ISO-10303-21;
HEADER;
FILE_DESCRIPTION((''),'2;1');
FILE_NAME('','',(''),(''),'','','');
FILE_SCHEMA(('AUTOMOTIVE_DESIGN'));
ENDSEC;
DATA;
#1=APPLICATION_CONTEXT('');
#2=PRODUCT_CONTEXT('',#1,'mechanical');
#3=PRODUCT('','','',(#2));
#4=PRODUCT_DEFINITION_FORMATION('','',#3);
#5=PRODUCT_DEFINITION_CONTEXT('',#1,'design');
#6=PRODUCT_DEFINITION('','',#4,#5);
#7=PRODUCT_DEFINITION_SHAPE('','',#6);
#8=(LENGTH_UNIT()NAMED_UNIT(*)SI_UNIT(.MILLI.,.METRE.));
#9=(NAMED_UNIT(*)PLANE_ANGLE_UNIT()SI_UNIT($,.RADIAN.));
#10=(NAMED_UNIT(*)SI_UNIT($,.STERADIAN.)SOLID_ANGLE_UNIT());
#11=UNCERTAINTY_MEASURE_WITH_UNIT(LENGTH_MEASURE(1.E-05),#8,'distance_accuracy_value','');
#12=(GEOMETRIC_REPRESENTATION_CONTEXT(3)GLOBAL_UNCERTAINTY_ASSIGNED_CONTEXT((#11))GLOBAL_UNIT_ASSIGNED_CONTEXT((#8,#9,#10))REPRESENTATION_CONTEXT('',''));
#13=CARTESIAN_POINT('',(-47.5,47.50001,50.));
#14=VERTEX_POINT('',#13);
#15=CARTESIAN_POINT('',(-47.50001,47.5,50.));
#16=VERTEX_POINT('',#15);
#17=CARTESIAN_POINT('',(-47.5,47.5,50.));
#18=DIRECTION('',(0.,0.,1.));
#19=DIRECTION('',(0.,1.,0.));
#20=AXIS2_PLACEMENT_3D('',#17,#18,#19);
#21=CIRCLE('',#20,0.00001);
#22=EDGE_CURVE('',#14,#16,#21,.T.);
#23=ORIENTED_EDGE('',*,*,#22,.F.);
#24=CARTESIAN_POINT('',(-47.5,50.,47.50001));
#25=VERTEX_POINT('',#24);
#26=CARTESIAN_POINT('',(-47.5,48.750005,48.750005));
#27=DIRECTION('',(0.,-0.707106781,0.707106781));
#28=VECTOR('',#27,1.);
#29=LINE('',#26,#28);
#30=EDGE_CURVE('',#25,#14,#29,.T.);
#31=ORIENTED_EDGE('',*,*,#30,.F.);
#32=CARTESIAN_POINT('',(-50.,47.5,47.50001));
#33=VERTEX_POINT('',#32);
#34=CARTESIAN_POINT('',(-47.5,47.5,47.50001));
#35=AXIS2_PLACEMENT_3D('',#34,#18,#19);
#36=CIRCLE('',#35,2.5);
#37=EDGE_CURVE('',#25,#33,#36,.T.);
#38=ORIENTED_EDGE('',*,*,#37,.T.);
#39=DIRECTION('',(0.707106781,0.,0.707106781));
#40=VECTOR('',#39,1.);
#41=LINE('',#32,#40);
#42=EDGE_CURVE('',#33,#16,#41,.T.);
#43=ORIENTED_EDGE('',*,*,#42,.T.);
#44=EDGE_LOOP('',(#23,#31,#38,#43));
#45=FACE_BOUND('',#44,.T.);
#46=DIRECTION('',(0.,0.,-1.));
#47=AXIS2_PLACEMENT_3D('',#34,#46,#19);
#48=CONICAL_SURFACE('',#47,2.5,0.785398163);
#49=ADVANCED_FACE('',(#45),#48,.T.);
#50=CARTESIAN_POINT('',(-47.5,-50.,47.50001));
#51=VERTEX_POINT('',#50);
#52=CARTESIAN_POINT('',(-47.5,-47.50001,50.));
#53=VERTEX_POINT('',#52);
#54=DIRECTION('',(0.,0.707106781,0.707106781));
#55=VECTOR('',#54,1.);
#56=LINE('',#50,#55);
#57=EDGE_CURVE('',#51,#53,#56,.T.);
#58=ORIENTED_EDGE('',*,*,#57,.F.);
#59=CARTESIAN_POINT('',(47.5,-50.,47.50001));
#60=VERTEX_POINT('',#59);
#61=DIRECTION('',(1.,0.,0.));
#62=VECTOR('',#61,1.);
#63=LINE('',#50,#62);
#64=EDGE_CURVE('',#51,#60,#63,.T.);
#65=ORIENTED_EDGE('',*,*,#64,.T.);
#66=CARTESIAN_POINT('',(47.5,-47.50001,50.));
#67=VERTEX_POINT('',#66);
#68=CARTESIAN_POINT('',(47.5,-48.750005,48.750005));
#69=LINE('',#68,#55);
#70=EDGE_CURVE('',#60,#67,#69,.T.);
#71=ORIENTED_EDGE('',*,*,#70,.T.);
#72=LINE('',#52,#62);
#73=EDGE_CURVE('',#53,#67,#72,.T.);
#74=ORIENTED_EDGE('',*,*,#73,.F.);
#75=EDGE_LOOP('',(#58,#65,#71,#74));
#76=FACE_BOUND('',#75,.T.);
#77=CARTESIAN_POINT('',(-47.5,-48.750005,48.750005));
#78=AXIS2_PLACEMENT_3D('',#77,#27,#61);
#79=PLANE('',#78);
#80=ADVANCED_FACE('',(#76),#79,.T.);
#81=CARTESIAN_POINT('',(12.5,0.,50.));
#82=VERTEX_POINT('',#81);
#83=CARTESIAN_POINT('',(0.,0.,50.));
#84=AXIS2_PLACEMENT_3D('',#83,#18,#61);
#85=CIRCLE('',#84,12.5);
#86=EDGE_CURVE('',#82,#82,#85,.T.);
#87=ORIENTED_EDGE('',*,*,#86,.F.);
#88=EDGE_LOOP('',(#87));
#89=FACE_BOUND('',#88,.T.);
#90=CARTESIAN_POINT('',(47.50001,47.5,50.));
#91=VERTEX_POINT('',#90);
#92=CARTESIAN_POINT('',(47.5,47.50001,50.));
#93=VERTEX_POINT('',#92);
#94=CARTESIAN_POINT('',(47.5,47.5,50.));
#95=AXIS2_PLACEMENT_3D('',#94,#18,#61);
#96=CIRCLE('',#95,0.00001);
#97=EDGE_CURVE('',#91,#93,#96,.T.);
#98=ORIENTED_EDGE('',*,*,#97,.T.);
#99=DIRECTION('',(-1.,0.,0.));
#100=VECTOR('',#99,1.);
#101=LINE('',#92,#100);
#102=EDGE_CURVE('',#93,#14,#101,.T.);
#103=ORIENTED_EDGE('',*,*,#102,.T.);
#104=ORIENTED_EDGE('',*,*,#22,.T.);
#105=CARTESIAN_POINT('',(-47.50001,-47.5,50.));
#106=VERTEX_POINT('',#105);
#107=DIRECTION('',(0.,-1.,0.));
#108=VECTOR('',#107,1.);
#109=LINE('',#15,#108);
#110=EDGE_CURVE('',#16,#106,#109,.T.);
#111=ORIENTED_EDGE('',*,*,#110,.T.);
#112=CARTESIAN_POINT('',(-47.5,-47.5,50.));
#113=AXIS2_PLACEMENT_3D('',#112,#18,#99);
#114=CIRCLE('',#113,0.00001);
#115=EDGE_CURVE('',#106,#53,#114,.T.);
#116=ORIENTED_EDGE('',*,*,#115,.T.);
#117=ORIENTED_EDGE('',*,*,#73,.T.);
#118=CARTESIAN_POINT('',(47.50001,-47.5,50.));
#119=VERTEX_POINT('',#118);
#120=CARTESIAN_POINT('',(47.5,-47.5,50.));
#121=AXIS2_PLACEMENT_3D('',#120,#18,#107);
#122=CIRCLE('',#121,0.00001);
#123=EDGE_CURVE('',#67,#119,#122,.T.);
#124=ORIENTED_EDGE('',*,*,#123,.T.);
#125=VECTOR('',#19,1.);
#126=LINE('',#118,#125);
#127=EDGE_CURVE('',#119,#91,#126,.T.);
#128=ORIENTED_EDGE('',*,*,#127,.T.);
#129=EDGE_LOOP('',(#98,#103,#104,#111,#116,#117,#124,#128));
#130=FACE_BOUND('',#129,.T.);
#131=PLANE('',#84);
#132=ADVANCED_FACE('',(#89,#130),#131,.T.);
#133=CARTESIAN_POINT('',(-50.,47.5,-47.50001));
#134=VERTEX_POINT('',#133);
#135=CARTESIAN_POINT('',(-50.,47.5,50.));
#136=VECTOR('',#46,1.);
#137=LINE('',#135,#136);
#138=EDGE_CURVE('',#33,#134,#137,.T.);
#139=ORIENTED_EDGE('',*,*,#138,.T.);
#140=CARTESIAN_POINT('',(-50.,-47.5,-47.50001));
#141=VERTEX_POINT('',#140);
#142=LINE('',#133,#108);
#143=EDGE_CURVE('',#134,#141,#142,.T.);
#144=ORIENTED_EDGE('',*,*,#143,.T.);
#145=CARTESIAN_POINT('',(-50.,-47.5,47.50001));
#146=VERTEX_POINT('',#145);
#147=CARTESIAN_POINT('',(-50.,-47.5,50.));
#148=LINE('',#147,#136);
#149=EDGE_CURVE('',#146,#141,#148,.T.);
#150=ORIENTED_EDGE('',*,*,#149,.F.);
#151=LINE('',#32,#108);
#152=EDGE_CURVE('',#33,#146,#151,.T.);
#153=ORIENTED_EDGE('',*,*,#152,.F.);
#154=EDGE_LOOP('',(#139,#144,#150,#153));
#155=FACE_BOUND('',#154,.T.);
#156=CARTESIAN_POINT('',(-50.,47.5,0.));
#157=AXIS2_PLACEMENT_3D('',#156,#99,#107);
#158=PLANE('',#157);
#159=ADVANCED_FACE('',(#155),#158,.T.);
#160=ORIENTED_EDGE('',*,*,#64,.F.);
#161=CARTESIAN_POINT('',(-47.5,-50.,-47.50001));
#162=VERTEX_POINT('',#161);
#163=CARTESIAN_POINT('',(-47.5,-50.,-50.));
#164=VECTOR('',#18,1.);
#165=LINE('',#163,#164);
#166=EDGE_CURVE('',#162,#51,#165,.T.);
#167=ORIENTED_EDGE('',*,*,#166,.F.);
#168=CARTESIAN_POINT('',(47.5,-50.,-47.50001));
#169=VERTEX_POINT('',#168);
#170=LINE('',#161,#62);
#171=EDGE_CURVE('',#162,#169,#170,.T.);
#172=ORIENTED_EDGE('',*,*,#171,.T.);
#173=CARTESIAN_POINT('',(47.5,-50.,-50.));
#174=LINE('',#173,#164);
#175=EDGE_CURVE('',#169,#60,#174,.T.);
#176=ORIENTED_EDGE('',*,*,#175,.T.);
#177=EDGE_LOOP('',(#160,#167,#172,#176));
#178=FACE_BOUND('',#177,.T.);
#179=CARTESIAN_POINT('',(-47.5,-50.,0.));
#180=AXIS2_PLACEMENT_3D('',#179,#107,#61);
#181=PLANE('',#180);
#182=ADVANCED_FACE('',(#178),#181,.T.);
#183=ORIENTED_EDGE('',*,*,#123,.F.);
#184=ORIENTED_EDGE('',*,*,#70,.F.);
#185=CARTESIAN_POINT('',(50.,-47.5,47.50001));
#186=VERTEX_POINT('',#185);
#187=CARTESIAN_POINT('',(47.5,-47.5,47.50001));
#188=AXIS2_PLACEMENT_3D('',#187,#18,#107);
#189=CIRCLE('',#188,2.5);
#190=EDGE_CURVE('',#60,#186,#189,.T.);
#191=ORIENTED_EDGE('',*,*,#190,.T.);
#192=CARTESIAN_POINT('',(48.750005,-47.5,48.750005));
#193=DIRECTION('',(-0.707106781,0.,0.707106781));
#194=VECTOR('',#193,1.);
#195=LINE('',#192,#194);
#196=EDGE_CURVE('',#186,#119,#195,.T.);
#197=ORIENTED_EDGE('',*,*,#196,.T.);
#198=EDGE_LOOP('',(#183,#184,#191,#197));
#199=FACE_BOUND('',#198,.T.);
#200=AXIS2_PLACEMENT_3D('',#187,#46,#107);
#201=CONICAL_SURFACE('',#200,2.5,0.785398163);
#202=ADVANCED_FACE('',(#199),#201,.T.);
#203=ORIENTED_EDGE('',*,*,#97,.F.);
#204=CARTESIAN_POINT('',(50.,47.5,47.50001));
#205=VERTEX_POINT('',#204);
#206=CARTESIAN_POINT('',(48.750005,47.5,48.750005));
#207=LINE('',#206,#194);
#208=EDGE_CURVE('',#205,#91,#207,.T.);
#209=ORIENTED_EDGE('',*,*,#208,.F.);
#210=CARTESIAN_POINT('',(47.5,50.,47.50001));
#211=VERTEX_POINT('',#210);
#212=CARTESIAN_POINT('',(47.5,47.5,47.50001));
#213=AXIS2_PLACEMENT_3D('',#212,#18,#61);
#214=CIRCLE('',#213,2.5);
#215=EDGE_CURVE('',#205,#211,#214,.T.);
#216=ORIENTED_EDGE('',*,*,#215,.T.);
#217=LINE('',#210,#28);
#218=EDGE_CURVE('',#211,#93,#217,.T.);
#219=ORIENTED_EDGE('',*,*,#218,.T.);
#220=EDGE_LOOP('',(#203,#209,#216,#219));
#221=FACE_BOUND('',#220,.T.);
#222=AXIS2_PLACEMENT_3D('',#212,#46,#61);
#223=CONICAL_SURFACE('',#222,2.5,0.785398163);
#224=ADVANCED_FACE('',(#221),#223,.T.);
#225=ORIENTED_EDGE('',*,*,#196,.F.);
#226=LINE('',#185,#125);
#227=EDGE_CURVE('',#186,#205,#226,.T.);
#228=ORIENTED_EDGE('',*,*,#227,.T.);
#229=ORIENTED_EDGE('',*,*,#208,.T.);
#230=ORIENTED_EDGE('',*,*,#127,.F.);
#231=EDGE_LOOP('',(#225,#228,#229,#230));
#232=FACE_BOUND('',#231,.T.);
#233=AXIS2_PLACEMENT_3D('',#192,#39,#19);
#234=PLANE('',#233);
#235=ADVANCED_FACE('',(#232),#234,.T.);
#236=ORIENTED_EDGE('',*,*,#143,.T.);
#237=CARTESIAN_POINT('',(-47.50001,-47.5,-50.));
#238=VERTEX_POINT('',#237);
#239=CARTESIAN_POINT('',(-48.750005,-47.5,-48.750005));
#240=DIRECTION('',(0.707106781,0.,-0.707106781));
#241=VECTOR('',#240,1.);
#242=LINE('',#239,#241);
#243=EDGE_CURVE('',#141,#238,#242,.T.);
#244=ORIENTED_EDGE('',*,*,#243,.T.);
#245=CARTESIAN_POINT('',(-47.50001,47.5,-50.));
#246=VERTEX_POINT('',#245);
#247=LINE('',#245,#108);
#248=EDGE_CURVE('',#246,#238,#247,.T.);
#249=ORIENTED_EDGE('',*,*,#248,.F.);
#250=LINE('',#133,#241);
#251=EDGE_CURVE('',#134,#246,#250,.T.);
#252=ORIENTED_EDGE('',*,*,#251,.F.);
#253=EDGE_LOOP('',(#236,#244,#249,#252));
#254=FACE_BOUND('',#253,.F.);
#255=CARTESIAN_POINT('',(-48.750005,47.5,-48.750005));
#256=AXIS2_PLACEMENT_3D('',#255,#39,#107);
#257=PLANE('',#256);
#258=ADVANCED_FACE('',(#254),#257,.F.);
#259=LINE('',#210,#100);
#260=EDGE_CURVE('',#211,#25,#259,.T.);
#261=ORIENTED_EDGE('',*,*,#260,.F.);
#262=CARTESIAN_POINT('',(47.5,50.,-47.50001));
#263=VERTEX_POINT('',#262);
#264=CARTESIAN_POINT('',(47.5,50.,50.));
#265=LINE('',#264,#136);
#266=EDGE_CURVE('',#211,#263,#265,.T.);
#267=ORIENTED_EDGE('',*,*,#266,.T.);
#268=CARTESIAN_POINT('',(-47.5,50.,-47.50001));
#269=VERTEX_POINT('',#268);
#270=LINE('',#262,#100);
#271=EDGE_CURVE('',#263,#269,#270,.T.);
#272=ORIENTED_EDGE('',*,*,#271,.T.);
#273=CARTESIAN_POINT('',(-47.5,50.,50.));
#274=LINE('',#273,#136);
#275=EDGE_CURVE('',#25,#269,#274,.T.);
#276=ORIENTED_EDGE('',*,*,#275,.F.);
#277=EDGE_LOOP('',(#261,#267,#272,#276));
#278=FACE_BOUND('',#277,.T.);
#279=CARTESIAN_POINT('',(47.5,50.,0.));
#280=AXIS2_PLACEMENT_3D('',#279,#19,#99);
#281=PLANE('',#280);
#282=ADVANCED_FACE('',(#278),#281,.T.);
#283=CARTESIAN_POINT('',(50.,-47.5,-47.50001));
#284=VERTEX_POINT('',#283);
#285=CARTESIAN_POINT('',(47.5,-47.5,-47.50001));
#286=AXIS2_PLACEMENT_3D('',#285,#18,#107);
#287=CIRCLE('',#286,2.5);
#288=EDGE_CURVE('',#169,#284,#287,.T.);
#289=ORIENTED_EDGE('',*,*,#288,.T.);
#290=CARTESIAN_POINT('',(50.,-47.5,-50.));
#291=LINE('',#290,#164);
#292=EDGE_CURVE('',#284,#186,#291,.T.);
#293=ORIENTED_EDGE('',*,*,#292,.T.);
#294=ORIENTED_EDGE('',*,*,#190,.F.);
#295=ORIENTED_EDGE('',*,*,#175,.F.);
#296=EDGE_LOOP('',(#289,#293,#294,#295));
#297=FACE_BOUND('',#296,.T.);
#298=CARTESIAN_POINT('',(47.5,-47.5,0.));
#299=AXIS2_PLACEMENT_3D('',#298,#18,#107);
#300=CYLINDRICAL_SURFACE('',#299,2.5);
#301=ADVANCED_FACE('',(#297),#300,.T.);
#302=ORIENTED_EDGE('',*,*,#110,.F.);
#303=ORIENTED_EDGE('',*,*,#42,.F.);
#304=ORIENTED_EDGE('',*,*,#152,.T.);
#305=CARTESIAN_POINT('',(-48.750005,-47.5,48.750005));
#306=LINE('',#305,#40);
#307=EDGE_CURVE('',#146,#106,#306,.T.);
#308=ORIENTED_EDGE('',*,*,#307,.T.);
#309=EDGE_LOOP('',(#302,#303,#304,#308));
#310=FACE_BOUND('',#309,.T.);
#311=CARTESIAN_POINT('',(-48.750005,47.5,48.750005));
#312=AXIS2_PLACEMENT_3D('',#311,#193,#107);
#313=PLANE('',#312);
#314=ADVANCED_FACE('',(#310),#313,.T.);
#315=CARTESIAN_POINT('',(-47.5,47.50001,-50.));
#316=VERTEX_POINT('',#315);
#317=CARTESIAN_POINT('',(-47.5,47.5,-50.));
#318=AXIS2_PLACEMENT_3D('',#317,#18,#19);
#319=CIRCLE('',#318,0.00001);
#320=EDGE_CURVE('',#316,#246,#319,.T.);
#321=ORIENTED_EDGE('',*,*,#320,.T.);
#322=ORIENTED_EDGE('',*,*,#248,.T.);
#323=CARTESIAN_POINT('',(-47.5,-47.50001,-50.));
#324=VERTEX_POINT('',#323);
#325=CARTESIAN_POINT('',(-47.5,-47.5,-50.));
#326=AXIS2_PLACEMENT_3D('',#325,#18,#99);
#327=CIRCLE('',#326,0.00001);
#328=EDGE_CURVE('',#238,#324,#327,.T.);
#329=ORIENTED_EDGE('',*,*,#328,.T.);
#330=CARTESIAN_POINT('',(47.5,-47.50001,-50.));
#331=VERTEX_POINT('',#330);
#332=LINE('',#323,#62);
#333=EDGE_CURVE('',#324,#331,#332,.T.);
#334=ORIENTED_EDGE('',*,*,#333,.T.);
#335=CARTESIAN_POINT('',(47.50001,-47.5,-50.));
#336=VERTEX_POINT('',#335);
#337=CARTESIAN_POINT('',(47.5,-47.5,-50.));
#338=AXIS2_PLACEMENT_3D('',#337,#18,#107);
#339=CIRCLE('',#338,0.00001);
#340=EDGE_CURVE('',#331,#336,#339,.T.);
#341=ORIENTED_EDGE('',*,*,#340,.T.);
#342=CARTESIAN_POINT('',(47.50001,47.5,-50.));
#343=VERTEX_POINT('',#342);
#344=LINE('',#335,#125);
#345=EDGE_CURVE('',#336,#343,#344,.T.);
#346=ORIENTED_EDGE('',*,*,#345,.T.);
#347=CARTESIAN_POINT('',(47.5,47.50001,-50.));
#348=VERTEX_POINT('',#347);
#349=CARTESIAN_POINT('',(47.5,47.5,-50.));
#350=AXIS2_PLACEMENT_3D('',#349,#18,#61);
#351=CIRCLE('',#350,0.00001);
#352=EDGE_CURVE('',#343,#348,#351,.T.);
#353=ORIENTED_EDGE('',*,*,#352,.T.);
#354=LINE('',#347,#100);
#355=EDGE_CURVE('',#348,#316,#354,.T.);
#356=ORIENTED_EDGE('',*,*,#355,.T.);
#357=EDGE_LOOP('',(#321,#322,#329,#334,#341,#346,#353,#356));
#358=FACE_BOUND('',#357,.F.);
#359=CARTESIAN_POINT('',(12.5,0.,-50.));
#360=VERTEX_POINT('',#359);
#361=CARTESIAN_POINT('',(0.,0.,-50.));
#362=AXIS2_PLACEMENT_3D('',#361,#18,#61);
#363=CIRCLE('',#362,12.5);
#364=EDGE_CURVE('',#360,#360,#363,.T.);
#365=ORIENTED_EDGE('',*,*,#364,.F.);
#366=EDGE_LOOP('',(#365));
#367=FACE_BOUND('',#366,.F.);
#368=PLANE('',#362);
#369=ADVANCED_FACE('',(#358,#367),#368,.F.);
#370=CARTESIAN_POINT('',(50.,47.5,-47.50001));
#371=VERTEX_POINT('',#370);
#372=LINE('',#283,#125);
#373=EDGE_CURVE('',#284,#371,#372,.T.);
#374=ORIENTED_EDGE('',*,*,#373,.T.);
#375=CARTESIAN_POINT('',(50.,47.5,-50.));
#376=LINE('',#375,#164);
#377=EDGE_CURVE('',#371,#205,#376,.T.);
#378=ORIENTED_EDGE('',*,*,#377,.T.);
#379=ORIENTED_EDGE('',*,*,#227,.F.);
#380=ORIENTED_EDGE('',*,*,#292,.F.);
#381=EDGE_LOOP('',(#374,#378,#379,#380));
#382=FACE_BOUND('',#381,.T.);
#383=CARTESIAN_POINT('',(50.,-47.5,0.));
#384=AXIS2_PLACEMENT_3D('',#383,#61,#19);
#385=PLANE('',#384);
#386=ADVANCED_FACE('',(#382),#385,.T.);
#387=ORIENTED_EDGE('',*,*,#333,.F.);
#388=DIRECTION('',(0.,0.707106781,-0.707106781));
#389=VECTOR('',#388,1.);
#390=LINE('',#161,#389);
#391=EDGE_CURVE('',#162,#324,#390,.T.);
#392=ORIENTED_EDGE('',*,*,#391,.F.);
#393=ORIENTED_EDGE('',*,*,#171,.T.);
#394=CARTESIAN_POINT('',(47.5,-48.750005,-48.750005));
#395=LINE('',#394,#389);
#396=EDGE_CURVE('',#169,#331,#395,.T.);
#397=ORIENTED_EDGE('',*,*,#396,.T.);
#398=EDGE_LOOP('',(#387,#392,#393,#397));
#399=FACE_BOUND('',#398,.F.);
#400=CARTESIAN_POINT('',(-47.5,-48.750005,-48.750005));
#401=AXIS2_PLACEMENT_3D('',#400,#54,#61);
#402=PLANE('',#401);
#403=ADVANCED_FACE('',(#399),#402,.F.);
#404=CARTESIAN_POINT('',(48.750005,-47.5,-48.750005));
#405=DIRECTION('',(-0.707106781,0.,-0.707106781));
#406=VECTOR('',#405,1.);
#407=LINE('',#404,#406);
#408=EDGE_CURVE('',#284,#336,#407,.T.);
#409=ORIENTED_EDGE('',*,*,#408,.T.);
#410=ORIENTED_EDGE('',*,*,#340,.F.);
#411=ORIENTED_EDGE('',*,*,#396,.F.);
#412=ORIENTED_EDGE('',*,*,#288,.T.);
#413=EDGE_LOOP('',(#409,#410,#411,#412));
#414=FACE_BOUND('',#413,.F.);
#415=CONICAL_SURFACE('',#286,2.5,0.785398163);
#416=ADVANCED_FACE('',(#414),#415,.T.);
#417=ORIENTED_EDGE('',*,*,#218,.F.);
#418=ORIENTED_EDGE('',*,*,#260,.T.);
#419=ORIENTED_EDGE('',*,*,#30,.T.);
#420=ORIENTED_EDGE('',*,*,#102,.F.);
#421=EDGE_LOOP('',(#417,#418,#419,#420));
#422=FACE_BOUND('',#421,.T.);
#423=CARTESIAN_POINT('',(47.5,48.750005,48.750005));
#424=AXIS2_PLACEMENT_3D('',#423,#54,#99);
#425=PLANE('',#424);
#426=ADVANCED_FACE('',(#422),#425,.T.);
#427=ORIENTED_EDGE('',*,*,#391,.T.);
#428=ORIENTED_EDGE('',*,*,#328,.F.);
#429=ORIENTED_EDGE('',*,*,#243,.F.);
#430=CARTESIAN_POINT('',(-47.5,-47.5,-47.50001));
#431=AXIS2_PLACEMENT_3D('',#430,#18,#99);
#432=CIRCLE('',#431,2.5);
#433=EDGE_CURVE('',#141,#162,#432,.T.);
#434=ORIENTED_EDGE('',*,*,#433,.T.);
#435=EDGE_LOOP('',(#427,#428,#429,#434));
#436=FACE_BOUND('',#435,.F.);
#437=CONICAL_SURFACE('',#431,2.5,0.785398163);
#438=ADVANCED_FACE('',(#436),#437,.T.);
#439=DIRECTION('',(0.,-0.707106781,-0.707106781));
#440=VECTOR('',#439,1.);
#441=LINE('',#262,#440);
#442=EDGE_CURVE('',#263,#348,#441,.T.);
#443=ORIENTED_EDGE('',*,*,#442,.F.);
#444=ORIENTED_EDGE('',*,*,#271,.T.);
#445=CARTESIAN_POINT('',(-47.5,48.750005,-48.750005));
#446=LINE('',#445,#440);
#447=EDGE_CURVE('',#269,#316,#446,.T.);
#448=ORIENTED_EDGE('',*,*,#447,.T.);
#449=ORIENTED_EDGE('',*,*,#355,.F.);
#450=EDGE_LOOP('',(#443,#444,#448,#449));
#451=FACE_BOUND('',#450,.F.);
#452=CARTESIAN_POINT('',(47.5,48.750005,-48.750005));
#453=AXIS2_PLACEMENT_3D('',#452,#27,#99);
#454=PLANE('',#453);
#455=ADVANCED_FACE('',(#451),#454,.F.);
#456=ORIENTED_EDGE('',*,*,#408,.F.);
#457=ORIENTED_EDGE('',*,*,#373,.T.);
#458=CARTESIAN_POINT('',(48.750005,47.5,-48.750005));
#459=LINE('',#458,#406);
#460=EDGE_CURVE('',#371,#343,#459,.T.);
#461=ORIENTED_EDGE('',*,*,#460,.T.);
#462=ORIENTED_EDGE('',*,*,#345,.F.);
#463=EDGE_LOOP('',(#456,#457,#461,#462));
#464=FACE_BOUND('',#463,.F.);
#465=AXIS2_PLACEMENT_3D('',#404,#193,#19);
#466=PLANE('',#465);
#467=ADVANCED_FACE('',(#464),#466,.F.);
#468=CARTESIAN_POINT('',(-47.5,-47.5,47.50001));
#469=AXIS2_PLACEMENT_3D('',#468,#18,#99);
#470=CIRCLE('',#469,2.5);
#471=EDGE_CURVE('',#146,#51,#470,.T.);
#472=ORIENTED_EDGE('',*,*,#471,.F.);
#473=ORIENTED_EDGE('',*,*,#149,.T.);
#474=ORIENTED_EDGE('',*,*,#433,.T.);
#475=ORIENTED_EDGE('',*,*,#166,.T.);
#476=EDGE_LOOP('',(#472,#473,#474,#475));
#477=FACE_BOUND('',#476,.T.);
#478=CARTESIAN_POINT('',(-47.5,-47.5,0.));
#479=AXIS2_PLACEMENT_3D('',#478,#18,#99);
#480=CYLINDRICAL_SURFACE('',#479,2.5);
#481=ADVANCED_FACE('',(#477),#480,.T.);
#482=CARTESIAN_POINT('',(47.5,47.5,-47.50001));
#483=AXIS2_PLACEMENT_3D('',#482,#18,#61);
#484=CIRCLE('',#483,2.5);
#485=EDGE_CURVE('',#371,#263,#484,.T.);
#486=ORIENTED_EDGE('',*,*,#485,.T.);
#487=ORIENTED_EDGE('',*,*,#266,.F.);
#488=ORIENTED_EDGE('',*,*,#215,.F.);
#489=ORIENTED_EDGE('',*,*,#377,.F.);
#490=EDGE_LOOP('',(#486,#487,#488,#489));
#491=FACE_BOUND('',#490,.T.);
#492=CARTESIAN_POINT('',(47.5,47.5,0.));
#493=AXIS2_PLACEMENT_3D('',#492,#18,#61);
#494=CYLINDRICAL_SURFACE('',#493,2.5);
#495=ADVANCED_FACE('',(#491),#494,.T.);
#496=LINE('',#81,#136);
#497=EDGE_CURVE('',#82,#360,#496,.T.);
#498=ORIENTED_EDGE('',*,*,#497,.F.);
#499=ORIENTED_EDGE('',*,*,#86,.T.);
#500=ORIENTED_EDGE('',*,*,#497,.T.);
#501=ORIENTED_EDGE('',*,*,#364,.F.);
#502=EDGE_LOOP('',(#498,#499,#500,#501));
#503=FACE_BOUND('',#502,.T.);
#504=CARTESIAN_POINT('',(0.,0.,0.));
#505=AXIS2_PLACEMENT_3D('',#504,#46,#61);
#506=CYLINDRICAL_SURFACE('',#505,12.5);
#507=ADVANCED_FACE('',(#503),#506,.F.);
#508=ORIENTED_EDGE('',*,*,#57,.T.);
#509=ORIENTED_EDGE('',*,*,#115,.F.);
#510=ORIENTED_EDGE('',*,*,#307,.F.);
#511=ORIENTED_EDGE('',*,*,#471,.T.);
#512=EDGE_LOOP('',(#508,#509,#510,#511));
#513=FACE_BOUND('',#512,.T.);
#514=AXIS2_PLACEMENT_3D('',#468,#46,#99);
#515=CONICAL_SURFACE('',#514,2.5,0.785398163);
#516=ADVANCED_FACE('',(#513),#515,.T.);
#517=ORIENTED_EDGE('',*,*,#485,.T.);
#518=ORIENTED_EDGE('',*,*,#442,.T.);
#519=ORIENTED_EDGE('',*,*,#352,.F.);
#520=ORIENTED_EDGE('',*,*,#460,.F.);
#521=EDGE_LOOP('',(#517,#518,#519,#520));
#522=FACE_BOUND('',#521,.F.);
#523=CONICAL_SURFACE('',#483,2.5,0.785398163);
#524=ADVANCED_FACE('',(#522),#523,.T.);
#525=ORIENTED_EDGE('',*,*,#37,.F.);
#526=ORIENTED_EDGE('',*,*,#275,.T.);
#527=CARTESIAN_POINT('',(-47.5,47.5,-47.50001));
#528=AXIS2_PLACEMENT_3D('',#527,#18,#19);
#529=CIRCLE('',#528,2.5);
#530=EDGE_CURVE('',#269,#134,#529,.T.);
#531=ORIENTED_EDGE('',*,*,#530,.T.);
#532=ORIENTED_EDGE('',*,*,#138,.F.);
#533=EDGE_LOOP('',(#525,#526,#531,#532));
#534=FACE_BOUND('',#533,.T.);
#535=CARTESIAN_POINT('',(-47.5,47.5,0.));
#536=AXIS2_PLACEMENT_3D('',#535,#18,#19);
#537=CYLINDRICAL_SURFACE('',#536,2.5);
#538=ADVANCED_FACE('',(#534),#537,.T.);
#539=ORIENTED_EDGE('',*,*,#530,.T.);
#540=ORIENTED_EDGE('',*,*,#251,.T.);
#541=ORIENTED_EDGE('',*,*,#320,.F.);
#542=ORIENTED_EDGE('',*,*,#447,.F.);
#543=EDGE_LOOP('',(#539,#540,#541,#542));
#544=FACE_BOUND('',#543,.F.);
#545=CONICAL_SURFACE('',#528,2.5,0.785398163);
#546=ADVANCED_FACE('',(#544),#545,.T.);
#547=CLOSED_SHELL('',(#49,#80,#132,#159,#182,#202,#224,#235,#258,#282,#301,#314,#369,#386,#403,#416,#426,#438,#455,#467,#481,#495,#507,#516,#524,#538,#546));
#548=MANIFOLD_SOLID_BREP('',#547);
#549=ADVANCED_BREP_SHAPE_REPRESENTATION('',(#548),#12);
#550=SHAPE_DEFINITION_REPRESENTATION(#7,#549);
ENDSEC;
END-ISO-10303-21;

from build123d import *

# Parameters (mm, degrees)
F0_R     = 12.5
F1_DEPTH = 50
F2_SIZE  = 2.49999


# Not quite as in the source:
# - a fillet or chamfer is up to 0.001 mm smaller than in the source, because OpenCascade refuses the exact size


with BuildPart() as f1:
    # F0 (on Top) → F1 (new body, symmetric)
    with BuildSketch(Plane.XY):
        with BuildLine():
            ThreePointArc((-50, -47.5), (-49.267766953, -49.267766953), (-47.5, -50))
            Line((-47.5, -50), (47.5, -50))
            ThreePointArc((47.5, -50), (49.267766953, -49.267766953), (50, -47.5))
            Line((50, -47.5), (50, 47.5))
            ThreePointArc((50, 47.5), (49.267766953, 49.267766953), (47.5, 50))
            Line((47.5, 50), (-47.5, 50))
            ThreePointArc((-47.5, 50), (-49.267766953, 49.267766953), (-50, 47.5))
            Line((-50, 47.5), (-50, -47.5))
        make_face()
        Circle(F0_R, mode=Mode.SUBTRACT)
    extrude(amount=F1_DEPTH, both=True)

    # F2 (size 2.5 in the source; OpenCascade refuses exactly that, so slightly less here)
    f2_edges = [f1.edges().sort_by_distance(p)[0] for p in [
        (50, 0, 50),
        (0, -50, 50),
        (-50, 0, 50),
        (0, 50, 50),
        (50, 0, -50),
        (0, 50, -50),
    ]]
    chamfer(f2_edges, length=F2_SIZE)


solid = f1.part
